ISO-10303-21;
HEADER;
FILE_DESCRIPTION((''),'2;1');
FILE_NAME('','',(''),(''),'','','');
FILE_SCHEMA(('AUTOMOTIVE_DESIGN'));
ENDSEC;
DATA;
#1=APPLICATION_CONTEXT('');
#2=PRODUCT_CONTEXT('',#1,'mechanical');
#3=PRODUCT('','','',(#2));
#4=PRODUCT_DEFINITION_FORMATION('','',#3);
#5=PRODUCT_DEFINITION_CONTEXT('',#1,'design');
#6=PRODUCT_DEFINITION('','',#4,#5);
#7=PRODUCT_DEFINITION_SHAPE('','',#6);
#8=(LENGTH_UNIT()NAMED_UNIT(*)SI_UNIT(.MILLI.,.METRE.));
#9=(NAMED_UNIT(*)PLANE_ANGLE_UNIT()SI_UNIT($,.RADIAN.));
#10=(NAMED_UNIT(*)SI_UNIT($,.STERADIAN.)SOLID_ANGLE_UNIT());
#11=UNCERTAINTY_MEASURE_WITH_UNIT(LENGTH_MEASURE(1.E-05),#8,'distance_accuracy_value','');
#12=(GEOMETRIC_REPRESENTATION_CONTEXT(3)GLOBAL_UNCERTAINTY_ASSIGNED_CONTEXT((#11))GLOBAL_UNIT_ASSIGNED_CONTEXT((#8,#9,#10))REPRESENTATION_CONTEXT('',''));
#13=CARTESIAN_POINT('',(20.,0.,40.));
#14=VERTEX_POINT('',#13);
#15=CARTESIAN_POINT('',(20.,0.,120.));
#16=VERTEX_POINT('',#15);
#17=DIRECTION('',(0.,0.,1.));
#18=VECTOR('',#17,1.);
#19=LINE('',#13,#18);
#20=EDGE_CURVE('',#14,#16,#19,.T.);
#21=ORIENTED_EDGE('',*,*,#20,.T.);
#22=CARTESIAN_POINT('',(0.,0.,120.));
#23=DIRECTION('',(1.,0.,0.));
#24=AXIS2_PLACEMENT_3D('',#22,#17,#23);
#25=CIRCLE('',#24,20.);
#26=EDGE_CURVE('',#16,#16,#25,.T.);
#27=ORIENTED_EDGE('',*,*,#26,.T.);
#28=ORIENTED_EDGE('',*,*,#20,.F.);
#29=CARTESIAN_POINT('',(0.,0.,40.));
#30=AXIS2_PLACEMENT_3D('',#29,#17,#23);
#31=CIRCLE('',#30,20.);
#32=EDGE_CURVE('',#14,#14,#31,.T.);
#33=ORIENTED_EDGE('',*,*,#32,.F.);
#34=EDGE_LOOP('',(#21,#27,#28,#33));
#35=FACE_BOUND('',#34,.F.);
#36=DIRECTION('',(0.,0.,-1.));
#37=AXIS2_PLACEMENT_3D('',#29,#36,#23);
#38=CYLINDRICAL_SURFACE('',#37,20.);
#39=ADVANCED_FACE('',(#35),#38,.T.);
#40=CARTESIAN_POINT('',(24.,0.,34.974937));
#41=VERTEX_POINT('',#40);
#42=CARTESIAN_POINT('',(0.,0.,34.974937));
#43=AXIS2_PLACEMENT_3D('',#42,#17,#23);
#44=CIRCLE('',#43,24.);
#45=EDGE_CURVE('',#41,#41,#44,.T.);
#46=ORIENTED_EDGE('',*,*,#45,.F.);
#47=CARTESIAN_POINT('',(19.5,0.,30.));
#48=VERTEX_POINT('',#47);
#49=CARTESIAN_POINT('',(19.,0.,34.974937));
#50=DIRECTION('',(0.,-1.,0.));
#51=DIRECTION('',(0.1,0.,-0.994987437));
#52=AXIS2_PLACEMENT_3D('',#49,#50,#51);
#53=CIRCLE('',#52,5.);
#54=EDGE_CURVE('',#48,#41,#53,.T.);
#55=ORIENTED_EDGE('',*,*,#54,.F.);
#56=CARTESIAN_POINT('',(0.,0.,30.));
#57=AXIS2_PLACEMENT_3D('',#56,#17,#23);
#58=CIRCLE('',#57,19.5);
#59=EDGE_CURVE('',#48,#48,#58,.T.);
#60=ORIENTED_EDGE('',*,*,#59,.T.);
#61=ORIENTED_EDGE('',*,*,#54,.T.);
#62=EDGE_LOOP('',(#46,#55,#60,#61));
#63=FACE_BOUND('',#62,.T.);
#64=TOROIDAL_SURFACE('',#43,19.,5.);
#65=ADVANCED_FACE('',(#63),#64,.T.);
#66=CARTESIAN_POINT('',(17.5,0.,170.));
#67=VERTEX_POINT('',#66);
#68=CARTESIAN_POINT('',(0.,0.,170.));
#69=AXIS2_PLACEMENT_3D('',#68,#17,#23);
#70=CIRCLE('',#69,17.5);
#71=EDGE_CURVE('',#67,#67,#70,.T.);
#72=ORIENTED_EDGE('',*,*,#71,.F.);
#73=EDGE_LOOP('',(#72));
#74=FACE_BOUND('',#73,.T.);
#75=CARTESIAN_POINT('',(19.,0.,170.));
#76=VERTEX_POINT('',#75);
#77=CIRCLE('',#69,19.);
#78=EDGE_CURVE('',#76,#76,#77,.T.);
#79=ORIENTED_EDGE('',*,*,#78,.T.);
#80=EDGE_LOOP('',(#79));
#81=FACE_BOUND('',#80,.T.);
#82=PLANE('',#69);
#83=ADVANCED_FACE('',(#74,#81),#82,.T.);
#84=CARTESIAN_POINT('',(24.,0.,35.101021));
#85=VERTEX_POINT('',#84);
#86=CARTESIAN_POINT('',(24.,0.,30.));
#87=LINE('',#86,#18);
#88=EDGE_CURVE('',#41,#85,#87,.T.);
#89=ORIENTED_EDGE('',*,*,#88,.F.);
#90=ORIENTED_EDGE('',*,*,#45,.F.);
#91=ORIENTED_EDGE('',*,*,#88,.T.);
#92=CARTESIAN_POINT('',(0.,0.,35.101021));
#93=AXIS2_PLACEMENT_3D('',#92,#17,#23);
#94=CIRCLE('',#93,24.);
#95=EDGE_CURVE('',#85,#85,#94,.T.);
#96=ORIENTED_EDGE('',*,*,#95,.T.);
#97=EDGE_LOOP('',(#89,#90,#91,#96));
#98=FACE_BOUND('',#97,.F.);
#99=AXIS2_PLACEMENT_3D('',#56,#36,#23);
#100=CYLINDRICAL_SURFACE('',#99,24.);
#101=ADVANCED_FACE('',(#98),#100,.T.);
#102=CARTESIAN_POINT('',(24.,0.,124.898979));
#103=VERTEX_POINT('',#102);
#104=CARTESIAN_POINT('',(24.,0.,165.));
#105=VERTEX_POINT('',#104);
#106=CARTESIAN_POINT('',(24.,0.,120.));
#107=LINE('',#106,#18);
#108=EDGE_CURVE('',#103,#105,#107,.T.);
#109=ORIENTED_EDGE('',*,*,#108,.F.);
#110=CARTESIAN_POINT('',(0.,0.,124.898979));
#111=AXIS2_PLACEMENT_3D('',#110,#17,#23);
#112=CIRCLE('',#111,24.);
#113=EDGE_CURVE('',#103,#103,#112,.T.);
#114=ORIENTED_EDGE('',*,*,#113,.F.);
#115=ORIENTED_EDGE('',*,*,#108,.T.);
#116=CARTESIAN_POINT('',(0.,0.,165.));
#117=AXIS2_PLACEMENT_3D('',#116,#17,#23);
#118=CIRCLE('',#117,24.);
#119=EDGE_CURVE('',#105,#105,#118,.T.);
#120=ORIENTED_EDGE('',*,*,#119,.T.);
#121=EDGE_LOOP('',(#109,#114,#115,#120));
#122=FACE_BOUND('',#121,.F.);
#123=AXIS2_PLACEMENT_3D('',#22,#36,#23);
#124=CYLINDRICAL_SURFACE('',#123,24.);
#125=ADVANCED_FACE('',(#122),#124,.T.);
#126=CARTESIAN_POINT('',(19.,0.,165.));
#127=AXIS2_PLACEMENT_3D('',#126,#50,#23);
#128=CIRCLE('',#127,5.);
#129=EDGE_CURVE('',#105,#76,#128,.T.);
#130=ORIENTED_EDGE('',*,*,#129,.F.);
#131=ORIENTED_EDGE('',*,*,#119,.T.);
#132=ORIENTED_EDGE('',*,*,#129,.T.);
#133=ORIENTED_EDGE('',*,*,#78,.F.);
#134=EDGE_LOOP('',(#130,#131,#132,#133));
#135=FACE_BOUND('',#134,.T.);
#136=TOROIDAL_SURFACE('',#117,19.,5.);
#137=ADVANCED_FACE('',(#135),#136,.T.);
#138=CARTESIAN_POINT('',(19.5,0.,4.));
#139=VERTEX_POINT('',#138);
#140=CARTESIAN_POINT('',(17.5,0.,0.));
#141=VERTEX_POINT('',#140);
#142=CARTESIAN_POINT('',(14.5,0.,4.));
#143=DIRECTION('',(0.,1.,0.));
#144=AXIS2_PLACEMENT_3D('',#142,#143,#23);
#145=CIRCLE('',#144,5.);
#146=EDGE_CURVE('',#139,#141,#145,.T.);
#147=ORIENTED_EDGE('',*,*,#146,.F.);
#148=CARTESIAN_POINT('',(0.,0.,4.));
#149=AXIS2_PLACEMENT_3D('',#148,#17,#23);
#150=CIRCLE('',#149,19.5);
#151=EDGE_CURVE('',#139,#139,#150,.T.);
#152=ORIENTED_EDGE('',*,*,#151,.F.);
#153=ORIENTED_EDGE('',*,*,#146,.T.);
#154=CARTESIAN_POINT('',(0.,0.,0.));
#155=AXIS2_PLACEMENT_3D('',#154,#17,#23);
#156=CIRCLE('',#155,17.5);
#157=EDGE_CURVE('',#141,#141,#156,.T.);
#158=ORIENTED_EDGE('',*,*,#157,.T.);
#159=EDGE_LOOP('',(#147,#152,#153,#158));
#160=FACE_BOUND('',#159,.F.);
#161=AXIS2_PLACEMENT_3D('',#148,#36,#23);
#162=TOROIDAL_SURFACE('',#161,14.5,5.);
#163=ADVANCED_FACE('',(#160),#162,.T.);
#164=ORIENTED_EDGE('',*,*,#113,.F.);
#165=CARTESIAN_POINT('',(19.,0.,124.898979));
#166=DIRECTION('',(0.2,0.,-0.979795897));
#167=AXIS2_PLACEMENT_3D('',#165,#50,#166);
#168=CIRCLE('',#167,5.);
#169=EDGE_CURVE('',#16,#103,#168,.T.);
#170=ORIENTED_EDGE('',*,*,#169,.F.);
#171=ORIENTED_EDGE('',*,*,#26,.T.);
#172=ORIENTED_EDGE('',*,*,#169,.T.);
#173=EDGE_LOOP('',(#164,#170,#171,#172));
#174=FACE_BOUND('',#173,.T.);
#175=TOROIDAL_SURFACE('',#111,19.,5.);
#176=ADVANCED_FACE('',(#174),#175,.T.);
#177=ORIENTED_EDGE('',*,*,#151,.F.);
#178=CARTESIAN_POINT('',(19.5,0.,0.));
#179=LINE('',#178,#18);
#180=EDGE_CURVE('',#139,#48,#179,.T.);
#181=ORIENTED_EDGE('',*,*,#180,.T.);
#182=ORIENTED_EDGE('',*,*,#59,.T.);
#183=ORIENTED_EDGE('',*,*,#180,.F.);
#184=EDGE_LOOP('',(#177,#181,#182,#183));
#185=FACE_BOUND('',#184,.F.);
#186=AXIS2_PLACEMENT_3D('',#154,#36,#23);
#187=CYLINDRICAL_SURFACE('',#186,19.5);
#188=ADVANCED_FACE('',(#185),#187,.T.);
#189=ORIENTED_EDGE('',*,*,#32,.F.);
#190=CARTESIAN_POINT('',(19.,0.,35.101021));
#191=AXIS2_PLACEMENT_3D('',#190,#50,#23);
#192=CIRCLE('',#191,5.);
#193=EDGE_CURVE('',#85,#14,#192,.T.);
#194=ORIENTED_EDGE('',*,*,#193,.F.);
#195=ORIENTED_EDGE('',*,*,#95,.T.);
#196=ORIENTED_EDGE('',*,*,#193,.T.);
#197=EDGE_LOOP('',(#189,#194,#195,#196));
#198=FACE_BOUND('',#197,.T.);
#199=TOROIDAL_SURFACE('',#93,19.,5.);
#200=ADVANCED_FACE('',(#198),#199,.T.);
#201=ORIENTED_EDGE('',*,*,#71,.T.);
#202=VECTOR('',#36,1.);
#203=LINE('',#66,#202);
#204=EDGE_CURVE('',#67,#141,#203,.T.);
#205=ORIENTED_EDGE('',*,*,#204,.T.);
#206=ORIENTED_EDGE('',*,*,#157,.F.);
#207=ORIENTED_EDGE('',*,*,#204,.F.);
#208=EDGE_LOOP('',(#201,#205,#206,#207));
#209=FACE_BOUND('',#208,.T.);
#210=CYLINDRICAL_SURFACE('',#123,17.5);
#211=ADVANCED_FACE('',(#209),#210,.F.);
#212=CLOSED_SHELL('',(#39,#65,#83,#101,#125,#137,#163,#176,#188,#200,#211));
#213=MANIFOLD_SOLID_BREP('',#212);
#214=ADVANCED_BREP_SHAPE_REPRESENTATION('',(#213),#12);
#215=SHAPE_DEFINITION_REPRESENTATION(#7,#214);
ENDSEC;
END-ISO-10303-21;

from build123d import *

# Parameters (mm, degrees)
F0_R     = 19.5
F0_R_2   = 17.5
F1_DEPTH = 30
F2_R     = 24
F2_R_2   = 19.5
F2_R_3   = 17.5
F3_DEPTH = 10
F4_R     = 20
F4_R_2   = 17.5
F5_DEPTH = 80
F6_R     = 24
F6_R_2   = 17.5
F7_DEPTH = 50


# Not quite as in the source:
# - a fillet or chamfer that OpenCascade refuses, or shapes differently, is made with other operations: its cross-section is extruded or revolved along the edge and cut away or added


with BuildPart() as f1:
    # F0 (on Top) → F1 (new body)
    with BuildSketch(Plane.XY):
        Circle(F0_R)
        Circle(F0_R_2, mode=Mode.SUBTRACT)
    extrude(amount=F1_DEPTH)

    # F2 (on face) → F3 (join)
    with BuildSketch(Plane.XY.offset(30)):
        Circle(F2_R)
        Circle(F2_R_2, mode=Mode.SUBTRACT)
        Circle(F2_R_2)
        Circle(F2_R_3, mode=Mode.SUBTRACT)
    extrude(amount=F3_DEPTH)

    # F4 (on face) → F5 (join)
    with BuildSketch(Plane.XY.offset(40)):
        Circle(F4_R)
        Circle(F4_R_2, mode=Mode.SUBTRACT)
    extrude(amount=F5_DEPTH)

    # F6 (on face) → F7 (join)
    with BuildSketch(Plane.XY.offset(120)):
        Circle(F6_R)
        Circle(F6_R_2, mode=Mode.SUBTRACT)
    extrude(amount=F7_DEPTH)

    # F8: fillet of radius 5 on 5 edges, made by hand

    # F8_s1 → F8_t2 (revolve, cut)
    with BuildSketch(Plane.XZ):
        with BuildLine():
            ThreePointArc((24, 165), (22.5355339059, 168.5355339059), (19, 170))
            Line((19, 170), (24, 170))
            Line((24, 170), (24, 165))
        make_face()
    revolve(axis=Axis((0, 0, 170), (0, 0, 1)), mode=Mode.SUBTRACT)

    # F8_s3 → F8_t4 (revolve, cut)
    with BuildSketch(Plane.XZ):
        with BuildLine():
            ThreePointArc((20, 120), (22.8729833462, 121.7367018254), (24, 124.8989794856))
            Line((24, 124.8989794856), (24, 120))
            Line((24, 120), (20, 120))
        make_face()
    revolve(axis=Axis((0, 0, 120), (0, 0, 1)), mode=Mode.SUBTRACT)

    # F8_s5 → F8_t6 (revolve, cut)
    with BuildSketch(Plane.XZ):
        with BuildLine():
            ThreePointArc((24, 35.1010205144), (22.8729833462, 38.2632981746), (20, 40))
            Line((20, 40), (24, 40))
            Line((24, 40), (24, 35.1010205144))
        make_face()
    revolve(axis=Axis((0, 0, 40), (0, 0, 1)), mode=Mode.SUBTRACT)

    # F8_s7 → F8_t8 (revolve, cut)
    with BuildSketch(Plane.XZ):
        with BuildLine():
            ThreePointArc((19.5, 30), (22.7080992435, 31.6208352193), (24, 34.9749371855))
            Line((24, 34.9749371855), (24, 30))
            Line((24, 30), (19.5, 30))
        make_face()
    revolve(axis=Axis((0, 0, 30), (0, 0, 1)), mode=Mode.SUBTRACT)

    # F8_s9 → F8_t10 (revolve, cut)
    with BuildSketch(Plane.XZ):
        with BuildLine():
            ThreePointArc((19.5, 4), (18.972135955, 1.7639320225), (17.5, 0))
            Line((17.5, 0), (19.5, 0))
            Line((19.5, 0), (19.5, 4))
        make_face()
    revolve(axis=Axis((0, 0, 0), (0, 0, 1)), mode=Mode.SUBTRACT)


solid = f1.part
